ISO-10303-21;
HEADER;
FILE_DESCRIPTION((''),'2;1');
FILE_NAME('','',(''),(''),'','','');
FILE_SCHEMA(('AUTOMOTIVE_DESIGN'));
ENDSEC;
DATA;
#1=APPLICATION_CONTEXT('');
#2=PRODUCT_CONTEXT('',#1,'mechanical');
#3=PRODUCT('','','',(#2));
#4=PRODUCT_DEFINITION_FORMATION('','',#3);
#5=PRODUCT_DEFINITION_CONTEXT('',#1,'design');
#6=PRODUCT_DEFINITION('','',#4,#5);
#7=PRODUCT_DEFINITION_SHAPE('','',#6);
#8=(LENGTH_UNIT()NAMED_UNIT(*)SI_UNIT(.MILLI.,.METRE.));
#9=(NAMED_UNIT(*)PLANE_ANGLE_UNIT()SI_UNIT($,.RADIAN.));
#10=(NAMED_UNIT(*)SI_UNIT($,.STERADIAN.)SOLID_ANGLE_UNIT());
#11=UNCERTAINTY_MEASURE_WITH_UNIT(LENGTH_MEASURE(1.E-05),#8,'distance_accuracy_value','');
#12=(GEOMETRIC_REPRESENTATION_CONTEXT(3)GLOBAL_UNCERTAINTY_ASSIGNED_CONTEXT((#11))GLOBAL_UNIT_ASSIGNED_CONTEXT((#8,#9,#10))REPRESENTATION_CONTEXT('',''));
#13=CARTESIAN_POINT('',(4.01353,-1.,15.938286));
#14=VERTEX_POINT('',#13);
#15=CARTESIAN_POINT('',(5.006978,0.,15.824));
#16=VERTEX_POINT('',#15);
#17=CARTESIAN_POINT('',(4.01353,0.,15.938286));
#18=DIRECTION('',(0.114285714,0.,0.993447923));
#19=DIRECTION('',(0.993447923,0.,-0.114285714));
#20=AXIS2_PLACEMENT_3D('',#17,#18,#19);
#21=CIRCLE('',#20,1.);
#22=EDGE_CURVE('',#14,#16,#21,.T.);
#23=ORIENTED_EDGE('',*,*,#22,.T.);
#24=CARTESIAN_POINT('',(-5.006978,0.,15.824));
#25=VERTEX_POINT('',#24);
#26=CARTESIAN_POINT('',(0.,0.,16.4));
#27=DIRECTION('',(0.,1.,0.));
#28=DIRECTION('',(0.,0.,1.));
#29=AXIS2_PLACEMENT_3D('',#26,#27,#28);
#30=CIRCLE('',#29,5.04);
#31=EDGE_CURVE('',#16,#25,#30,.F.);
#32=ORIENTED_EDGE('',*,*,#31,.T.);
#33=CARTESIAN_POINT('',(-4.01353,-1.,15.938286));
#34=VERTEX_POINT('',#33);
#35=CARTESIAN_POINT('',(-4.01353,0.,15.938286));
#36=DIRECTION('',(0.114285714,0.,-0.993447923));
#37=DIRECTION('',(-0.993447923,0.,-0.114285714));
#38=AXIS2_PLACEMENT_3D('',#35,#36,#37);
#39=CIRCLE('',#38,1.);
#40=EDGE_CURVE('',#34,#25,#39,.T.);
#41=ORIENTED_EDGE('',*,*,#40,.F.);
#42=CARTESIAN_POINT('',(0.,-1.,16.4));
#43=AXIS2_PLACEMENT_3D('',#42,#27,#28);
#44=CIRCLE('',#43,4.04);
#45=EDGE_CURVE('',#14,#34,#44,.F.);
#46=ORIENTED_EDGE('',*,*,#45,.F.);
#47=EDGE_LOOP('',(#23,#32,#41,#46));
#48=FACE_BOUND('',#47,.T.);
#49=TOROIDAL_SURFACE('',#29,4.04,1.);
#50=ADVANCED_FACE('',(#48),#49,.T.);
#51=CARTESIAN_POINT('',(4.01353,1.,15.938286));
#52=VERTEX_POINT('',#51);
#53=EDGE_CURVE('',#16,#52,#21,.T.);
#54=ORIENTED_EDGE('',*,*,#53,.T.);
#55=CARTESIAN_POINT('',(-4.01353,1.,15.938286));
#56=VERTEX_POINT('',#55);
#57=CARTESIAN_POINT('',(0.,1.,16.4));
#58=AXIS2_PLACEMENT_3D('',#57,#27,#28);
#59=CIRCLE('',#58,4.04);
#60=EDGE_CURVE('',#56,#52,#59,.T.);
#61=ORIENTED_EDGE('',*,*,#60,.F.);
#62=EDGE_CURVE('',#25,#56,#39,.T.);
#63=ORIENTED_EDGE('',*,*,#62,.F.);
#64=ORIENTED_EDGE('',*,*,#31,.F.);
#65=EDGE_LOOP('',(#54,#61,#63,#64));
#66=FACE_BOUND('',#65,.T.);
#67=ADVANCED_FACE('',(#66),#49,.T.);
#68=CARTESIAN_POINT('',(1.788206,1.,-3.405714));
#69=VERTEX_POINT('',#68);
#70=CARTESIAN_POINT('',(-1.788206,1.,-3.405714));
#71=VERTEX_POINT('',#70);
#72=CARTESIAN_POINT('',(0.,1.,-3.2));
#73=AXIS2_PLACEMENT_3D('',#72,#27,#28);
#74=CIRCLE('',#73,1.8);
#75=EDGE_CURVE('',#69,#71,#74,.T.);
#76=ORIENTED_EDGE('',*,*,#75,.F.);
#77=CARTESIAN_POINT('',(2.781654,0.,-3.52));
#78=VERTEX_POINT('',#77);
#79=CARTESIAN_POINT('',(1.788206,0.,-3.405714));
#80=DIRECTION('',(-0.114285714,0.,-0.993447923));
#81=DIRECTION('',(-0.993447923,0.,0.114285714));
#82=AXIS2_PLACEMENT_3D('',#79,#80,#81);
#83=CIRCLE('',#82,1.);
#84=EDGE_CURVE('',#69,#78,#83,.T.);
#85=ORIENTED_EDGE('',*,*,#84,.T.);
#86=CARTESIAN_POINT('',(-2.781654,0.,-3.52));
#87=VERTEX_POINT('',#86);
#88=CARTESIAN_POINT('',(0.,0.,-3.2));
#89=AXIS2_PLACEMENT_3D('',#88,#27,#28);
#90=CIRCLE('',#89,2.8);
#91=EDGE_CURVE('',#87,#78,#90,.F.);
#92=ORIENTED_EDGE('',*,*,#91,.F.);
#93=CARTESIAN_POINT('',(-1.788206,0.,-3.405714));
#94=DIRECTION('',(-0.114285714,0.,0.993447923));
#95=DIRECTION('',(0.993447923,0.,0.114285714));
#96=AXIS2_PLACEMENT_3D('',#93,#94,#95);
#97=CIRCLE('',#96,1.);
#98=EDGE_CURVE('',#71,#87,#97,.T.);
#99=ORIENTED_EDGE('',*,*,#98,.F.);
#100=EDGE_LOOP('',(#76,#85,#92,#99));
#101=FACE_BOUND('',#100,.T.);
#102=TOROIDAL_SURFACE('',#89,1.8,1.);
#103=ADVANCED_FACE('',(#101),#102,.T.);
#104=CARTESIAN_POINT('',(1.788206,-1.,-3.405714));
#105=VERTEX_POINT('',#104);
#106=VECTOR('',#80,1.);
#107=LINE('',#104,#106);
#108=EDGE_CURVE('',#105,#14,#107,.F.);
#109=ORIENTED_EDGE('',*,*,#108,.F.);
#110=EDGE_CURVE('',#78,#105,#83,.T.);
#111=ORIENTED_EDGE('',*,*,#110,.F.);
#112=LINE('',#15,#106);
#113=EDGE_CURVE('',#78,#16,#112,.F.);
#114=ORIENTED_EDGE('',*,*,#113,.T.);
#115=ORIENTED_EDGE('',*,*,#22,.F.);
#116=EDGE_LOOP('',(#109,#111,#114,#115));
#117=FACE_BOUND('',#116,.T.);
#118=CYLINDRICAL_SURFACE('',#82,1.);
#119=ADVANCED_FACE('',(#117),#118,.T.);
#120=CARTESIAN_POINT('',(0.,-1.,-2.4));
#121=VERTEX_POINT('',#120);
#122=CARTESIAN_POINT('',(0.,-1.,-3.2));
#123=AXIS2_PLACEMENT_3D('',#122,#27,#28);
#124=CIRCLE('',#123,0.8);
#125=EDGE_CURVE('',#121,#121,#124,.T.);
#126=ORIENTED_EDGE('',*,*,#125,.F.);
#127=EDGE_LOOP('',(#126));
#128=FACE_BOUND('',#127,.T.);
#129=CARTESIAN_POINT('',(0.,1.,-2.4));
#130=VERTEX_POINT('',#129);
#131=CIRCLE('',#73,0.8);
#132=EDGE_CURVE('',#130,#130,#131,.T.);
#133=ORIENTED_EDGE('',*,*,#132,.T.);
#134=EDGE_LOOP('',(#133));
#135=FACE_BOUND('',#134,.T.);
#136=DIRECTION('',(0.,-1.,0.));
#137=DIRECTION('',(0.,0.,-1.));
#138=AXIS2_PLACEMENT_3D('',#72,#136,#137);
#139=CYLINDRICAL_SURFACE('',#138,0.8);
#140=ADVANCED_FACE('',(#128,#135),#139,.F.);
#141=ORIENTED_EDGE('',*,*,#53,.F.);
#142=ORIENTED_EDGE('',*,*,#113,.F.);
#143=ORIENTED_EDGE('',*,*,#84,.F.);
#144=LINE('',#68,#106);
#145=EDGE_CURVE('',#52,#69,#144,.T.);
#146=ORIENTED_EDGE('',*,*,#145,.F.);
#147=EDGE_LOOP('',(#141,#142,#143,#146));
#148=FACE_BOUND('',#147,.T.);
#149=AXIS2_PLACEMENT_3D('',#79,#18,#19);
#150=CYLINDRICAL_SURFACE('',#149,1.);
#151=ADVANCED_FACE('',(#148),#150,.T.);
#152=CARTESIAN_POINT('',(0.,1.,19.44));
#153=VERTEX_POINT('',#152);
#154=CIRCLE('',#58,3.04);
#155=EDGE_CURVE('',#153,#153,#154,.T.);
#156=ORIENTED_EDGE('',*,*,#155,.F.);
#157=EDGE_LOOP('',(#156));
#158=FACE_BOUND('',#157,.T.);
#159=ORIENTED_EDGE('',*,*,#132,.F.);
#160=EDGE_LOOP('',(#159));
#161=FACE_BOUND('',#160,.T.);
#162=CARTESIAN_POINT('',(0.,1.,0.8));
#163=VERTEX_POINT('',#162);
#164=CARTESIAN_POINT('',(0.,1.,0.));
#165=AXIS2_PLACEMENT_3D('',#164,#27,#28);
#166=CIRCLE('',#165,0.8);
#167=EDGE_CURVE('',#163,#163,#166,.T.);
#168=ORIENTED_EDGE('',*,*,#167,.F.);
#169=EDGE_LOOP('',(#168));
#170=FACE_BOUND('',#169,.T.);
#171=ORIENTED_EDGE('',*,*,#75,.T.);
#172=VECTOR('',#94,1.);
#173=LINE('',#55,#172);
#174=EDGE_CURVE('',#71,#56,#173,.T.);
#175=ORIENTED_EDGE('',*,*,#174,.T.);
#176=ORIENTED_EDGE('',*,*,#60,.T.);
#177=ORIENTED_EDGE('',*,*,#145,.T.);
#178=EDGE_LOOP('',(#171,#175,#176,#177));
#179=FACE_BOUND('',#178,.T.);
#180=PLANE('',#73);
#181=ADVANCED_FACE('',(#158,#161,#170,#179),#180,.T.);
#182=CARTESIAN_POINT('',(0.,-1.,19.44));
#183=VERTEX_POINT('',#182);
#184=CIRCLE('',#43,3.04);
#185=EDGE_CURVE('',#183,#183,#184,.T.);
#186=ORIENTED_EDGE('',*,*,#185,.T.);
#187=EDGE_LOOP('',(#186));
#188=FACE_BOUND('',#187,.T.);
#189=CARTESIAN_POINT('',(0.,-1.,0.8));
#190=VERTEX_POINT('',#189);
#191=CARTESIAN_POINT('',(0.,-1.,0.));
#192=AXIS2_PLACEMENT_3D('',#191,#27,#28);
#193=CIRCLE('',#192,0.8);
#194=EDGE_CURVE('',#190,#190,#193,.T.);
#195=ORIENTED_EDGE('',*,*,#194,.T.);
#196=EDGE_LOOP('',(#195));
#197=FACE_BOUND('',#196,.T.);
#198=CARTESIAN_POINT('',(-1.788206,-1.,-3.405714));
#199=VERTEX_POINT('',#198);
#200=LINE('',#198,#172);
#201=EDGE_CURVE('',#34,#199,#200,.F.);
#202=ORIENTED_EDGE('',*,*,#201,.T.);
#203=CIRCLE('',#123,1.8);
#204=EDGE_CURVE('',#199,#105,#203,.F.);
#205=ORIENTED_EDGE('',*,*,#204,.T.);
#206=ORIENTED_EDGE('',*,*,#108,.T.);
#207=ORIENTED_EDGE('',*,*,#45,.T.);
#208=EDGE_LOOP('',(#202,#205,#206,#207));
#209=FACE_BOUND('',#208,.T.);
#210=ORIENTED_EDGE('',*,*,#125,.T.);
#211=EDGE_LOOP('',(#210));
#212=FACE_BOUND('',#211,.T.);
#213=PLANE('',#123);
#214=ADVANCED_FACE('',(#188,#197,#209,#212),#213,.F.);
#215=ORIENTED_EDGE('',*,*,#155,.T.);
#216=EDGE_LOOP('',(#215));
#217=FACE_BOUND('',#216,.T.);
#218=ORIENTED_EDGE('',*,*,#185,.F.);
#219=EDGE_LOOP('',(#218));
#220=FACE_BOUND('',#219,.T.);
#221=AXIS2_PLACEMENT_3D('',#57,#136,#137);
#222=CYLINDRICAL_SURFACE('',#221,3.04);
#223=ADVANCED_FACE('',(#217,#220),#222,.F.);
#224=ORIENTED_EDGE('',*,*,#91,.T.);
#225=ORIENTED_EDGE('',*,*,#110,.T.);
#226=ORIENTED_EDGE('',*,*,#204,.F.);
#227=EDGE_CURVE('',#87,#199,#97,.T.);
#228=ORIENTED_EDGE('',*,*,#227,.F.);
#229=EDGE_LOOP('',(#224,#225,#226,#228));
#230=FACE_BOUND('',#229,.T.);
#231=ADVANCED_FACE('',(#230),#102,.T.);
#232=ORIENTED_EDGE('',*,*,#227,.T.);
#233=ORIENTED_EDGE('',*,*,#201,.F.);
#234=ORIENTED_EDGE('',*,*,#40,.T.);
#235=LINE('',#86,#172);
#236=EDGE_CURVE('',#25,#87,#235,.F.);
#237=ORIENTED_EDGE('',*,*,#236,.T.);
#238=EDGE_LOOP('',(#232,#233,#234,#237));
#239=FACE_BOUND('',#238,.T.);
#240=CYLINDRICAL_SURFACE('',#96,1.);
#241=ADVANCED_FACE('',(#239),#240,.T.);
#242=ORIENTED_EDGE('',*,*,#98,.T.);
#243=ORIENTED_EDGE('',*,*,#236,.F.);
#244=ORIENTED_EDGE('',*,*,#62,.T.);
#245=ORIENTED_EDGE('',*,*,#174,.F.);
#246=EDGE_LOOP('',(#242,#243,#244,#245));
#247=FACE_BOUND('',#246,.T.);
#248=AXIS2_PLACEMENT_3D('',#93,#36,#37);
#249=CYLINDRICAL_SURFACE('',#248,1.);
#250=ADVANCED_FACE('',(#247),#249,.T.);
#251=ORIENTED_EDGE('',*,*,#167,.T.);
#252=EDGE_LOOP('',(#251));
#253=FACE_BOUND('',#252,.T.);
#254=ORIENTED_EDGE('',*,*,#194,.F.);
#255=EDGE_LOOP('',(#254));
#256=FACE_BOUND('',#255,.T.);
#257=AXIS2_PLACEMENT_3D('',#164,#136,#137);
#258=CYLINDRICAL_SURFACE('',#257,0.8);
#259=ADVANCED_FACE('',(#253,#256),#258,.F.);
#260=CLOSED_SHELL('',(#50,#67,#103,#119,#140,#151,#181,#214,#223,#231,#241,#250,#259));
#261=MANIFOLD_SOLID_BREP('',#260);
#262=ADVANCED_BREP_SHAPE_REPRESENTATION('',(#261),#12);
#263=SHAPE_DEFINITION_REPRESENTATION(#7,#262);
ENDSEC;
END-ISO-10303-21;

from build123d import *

# Parameters (mm, degrees)
CROQUIS2_R              = 0.8
CROQUIS2_R_2            = 3.04
SALIENTE_EXTRUIR1_DEPTH = 1
REDONDEO1_R             = 1


with BuildPart() as part:
    # Croquis2 → Saliente-Extruir1 (new, symmetric)
    with BuildSketch(Plane(origin=(0, 0, 0), x_dir=(1, 0, 0), z_dir=(0, 1, 0))):
        with BuildLine():
            Line((-2.781654184, 3.52), (-5.006977531, -15.824))
            ThreePointArc((-5.006977531, -15.824), (0, -21.44), (5.006977531, -15.824))
            Line((5.006977531, -15.824), (2.781654184, 3.52))
            ThreePointArc((2.781654184, 3.52), (0, 6), (-2.781654184, 3.52))
        make_face()
        with Locations(Location((0, 0, 0), (0, 0, 270))):
            Circle(CROQUIS2_R, mode=Mode.SUBTRACT)
        with Locations(Location((0, 3.2, 0), (0, 0, 270))):
            Circle(CROQUIS2_R, mode=Mode.SUBTRACT)
        with Locations(Location((0, -16.4, 0), (0, 0, 270))):
            Circle(CROQUIS2_R_2, mode=Mode.SUBTRACT)
    extrude(amount=SALIENTE_EXTRUIR1_DEPTH, both=True)

    # Redondeo1
    redondeo1_edges = [part.edges().sort_by_distance(p)[0] for p in [
        (-3.894315858, -1, 6.152),
        (0, -1, -6),
        (3.894315858, -1, 6.152),
        (-3.894315858, 1, 6.152),
        (0, 1, -6),
        (3.894315858, 1, 6.152),
        (0, -1, 21.44),
        (0, 1, 21.44),
    ]]
    fillet(redondeo1_edges, radius=REDONDEO1_R - 0.0001)  # a hair under: the kernel refuses the full size


solid = part.part
